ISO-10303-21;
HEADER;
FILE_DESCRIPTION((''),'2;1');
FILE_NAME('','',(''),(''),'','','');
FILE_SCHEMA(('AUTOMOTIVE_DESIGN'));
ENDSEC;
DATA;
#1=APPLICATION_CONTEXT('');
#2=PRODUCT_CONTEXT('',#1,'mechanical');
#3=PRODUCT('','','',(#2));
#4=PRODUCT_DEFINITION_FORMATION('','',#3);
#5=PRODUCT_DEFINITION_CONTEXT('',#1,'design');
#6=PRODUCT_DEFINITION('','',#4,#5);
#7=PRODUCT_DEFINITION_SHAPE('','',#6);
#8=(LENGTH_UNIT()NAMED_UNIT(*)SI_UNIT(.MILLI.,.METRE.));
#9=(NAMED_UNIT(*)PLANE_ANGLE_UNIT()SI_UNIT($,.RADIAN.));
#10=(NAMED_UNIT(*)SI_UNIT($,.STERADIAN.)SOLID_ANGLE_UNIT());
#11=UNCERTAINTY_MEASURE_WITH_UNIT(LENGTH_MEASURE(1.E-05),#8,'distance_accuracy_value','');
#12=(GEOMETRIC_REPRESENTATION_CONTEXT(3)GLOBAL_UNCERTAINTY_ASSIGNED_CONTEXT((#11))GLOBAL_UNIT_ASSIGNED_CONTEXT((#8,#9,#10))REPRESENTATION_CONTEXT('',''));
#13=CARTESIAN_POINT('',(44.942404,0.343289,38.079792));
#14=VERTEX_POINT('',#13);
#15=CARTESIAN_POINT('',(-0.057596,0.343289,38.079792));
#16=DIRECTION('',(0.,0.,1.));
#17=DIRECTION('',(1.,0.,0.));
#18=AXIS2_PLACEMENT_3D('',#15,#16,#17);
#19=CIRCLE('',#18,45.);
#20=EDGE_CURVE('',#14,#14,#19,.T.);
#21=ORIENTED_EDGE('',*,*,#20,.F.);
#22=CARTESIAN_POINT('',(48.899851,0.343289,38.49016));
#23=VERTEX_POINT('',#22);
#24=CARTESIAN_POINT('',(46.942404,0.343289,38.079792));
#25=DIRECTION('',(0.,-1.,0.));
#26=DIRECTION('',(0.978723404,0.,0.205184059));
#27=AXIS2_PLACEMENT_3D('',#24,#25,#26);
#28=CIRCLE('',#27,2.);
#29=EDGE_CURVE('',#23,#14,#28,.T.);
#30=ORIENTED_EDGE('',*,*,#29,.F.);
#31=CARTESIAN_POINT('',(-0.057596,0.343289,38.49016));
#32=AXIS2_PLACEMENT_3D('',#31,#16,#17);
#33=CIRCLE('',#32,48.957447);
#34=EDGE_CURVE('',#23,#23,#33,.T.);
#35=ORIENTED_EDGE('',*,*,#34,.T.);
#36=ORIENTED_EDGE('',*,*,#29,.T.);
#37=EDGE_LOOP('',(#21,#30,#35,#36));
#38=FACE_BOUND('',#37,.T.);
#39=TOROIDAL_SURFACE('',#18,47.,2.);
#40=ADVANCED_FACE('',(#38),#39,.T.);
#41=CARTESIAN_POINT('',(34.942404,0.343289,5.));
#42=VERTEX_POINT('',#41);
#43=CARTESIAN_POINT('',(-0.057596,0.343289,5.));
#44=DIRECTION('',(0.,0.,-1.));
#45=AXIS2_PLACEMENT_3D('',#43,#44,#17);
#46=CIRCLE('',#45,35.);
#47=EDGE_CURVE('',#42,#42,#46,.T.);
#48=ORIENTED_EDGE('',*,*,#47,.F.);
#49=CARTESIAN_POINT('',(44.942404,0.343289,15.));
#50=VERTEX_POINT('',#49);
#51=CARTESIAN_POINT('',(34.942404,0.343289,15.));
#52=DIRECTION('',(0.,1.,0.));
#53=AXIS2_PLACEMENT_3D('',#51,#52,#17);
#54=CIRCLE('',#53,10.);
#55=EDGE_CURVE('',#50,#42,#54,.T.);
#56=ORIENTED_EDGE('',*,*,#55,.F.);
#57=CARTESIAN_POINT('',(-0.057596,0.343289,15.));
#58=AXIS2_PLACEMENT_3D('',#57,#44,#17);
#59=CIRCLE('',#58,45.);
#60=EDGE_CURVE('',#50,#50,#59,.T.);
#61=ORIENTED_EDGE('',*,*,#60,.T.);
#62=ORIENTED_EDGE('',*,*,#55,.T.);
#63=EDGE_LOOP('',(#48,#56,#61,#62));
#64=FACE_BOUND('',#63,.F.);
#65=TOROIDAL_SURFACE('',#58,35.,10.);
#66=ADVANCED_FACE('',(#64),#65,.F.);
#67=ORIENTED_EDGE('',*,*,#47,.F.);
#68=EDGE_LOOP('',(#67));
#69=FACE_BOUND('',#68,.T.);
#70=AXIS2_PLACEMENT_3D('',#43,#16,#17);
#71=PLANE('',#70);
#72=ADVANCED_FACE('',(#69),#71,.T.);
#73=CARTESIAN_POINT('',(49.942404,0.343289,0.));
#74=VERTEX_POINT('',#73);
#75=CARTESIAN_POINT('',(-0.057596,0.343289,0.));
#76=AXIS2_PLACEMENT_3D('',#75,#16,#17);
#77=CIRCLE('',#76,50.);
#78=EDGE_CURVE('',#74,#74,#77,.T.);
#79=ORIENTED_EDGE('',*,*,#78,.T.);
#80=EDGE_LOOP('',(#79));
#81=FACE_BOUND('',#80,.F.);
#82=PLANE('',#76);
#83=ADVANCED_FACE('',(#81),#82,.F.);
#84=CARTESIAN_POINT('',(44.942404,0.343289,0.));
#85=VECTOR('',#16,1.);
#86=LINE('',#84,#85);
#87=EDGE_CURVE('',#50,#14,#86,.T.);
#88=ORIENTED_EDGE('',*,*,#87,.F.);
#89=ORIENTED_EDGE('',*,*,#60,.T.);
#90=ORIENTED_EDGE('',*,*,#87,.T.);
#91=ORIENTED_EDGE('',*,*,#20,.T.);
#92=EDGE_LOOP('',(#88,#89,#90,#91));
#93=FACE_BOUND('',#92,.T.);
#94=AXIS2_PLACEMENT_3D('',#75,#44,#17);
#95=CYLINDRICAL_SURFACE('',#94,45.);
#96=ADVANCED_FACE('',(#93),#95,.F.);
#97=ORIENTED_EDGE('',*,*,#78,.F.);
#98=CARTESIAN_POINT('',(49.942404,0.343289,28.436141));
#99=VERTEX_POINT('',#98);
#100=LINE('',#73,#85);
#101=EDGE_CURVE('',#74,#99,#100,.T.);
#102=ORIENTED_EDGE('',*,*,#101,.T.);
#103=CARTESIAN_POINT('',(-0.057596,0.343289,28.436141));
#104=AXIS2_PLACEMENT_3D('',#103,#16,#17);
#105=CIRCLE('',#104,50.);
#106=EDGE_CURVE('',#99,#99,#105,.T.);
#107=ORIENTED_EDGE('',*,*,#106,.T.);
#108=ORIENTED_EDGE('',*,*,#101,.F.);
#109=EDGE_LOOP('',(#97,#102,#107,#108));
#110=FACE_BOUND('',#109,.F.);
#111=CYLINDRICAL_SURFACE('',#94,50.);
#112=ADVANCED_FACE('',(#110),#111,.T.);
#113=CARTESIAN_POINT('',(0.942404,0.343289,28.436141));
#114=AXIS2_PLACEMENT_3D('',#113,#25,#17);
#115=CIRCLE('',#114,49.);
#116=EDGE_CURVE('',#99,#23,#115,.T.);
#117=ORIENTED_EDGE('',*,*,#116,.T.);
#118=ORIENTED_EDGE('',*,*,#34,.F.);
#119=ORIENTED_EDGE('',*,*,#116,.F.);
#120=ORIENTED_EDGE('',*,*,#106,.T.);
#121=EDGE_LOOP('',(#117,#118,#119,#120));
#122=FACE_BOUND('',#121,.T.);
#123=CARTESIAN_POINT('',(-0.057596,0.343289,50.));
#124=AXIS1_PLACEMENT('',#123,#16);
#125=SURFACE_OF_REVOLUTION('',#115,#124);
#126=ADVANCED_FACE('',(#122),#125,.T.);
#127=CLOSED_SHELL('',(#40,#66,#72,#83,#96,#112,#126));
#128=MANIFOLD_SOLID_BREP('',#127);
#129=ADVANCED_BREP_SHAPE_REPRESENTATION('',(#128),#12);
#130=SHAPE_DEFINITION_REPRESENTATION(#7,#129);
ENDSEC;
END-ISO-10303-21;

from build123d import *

# Parameters (mm, degrees)
F0_R     = 50
F1_DEPTH = 50
F2_T     = -5
F5_R     = 10


# Not quite as in the source:
# - a fillet or chamfer that OpenCascade refuses, or shapes differently, is made with other operations: its cross-section is extruded or revolved along the edge and cut away or added


with BuildPart() as f1:
    # F0 (on Top) → F1 (new body)
    with BuildSketch(Plane.XY):
        with Locations((-0.0575962756, 0.3432892042)):
            Circle(F0_R)
    extrude(amount=F1_DEPTH)

    # F2
    f2_openings = [f1.faces().sort_by_distance(p)[0] for p in [
        (-0.057596, 0.343289, 50),
    ]]
    offset(amount=F2_T, openings=f2_openings)

    # F3: fillet of radius 49 on 1 edges, made by hand

    # F3_s1 → F3_t2 (revolve, cut)
    with BuildSketch(Plane.XZ.offset(-0.3432892042)):
        with BuildLine():
            ThreePointArc((49.9424037244, 28.4361413472), (48.6760396639, 39.5041131577), (44.9424037244, 50))
            Line((44.9424037244, 50), (49.9424037244, 50))
            Line((49.9424037244, 50), (49.9424037244, 28.4361413472))
        make_face()
    revolve(axis=Axis((-0.0575962756, 0.3432892042, 50), (0, 0, 1)), mode=Mode.SUBTRACT)

    # F4: fillet of radius 2 on 1 edges, made by hand

    # F4_s1 → F4_t2 (revolve, cut)
    with BuildSketch(Plane.XZ.offset(-0.3432892042)):
        with BuildLine():
            ThreePointArc((48.8998505329, 38.4901602258), (46.7361194752, 40.0691253656), (44.9424037244, 38.0797921083))
            Line((44.9424037244, 38.0797921083), (44.9424037244, 50))
            ThreePointArc((44.9424037244, 50), (47.2798843291, 44.3684321809), (48.8998505329, 38.4901602258))
        make_face()
    revolve(axis=Axis((-0.0575962756, 0.3432892042, 50), (0, 0, 1)), mode=Mode.SUBTRACT)

    # F5
    f5_edges = [f1.edges().sort_by_distance(p)[0] for p in [
        (-45.057596, 0.343289, 5),
    ]]
    fillet(f5_edges, radius=F5_R)


solid = f1.part
